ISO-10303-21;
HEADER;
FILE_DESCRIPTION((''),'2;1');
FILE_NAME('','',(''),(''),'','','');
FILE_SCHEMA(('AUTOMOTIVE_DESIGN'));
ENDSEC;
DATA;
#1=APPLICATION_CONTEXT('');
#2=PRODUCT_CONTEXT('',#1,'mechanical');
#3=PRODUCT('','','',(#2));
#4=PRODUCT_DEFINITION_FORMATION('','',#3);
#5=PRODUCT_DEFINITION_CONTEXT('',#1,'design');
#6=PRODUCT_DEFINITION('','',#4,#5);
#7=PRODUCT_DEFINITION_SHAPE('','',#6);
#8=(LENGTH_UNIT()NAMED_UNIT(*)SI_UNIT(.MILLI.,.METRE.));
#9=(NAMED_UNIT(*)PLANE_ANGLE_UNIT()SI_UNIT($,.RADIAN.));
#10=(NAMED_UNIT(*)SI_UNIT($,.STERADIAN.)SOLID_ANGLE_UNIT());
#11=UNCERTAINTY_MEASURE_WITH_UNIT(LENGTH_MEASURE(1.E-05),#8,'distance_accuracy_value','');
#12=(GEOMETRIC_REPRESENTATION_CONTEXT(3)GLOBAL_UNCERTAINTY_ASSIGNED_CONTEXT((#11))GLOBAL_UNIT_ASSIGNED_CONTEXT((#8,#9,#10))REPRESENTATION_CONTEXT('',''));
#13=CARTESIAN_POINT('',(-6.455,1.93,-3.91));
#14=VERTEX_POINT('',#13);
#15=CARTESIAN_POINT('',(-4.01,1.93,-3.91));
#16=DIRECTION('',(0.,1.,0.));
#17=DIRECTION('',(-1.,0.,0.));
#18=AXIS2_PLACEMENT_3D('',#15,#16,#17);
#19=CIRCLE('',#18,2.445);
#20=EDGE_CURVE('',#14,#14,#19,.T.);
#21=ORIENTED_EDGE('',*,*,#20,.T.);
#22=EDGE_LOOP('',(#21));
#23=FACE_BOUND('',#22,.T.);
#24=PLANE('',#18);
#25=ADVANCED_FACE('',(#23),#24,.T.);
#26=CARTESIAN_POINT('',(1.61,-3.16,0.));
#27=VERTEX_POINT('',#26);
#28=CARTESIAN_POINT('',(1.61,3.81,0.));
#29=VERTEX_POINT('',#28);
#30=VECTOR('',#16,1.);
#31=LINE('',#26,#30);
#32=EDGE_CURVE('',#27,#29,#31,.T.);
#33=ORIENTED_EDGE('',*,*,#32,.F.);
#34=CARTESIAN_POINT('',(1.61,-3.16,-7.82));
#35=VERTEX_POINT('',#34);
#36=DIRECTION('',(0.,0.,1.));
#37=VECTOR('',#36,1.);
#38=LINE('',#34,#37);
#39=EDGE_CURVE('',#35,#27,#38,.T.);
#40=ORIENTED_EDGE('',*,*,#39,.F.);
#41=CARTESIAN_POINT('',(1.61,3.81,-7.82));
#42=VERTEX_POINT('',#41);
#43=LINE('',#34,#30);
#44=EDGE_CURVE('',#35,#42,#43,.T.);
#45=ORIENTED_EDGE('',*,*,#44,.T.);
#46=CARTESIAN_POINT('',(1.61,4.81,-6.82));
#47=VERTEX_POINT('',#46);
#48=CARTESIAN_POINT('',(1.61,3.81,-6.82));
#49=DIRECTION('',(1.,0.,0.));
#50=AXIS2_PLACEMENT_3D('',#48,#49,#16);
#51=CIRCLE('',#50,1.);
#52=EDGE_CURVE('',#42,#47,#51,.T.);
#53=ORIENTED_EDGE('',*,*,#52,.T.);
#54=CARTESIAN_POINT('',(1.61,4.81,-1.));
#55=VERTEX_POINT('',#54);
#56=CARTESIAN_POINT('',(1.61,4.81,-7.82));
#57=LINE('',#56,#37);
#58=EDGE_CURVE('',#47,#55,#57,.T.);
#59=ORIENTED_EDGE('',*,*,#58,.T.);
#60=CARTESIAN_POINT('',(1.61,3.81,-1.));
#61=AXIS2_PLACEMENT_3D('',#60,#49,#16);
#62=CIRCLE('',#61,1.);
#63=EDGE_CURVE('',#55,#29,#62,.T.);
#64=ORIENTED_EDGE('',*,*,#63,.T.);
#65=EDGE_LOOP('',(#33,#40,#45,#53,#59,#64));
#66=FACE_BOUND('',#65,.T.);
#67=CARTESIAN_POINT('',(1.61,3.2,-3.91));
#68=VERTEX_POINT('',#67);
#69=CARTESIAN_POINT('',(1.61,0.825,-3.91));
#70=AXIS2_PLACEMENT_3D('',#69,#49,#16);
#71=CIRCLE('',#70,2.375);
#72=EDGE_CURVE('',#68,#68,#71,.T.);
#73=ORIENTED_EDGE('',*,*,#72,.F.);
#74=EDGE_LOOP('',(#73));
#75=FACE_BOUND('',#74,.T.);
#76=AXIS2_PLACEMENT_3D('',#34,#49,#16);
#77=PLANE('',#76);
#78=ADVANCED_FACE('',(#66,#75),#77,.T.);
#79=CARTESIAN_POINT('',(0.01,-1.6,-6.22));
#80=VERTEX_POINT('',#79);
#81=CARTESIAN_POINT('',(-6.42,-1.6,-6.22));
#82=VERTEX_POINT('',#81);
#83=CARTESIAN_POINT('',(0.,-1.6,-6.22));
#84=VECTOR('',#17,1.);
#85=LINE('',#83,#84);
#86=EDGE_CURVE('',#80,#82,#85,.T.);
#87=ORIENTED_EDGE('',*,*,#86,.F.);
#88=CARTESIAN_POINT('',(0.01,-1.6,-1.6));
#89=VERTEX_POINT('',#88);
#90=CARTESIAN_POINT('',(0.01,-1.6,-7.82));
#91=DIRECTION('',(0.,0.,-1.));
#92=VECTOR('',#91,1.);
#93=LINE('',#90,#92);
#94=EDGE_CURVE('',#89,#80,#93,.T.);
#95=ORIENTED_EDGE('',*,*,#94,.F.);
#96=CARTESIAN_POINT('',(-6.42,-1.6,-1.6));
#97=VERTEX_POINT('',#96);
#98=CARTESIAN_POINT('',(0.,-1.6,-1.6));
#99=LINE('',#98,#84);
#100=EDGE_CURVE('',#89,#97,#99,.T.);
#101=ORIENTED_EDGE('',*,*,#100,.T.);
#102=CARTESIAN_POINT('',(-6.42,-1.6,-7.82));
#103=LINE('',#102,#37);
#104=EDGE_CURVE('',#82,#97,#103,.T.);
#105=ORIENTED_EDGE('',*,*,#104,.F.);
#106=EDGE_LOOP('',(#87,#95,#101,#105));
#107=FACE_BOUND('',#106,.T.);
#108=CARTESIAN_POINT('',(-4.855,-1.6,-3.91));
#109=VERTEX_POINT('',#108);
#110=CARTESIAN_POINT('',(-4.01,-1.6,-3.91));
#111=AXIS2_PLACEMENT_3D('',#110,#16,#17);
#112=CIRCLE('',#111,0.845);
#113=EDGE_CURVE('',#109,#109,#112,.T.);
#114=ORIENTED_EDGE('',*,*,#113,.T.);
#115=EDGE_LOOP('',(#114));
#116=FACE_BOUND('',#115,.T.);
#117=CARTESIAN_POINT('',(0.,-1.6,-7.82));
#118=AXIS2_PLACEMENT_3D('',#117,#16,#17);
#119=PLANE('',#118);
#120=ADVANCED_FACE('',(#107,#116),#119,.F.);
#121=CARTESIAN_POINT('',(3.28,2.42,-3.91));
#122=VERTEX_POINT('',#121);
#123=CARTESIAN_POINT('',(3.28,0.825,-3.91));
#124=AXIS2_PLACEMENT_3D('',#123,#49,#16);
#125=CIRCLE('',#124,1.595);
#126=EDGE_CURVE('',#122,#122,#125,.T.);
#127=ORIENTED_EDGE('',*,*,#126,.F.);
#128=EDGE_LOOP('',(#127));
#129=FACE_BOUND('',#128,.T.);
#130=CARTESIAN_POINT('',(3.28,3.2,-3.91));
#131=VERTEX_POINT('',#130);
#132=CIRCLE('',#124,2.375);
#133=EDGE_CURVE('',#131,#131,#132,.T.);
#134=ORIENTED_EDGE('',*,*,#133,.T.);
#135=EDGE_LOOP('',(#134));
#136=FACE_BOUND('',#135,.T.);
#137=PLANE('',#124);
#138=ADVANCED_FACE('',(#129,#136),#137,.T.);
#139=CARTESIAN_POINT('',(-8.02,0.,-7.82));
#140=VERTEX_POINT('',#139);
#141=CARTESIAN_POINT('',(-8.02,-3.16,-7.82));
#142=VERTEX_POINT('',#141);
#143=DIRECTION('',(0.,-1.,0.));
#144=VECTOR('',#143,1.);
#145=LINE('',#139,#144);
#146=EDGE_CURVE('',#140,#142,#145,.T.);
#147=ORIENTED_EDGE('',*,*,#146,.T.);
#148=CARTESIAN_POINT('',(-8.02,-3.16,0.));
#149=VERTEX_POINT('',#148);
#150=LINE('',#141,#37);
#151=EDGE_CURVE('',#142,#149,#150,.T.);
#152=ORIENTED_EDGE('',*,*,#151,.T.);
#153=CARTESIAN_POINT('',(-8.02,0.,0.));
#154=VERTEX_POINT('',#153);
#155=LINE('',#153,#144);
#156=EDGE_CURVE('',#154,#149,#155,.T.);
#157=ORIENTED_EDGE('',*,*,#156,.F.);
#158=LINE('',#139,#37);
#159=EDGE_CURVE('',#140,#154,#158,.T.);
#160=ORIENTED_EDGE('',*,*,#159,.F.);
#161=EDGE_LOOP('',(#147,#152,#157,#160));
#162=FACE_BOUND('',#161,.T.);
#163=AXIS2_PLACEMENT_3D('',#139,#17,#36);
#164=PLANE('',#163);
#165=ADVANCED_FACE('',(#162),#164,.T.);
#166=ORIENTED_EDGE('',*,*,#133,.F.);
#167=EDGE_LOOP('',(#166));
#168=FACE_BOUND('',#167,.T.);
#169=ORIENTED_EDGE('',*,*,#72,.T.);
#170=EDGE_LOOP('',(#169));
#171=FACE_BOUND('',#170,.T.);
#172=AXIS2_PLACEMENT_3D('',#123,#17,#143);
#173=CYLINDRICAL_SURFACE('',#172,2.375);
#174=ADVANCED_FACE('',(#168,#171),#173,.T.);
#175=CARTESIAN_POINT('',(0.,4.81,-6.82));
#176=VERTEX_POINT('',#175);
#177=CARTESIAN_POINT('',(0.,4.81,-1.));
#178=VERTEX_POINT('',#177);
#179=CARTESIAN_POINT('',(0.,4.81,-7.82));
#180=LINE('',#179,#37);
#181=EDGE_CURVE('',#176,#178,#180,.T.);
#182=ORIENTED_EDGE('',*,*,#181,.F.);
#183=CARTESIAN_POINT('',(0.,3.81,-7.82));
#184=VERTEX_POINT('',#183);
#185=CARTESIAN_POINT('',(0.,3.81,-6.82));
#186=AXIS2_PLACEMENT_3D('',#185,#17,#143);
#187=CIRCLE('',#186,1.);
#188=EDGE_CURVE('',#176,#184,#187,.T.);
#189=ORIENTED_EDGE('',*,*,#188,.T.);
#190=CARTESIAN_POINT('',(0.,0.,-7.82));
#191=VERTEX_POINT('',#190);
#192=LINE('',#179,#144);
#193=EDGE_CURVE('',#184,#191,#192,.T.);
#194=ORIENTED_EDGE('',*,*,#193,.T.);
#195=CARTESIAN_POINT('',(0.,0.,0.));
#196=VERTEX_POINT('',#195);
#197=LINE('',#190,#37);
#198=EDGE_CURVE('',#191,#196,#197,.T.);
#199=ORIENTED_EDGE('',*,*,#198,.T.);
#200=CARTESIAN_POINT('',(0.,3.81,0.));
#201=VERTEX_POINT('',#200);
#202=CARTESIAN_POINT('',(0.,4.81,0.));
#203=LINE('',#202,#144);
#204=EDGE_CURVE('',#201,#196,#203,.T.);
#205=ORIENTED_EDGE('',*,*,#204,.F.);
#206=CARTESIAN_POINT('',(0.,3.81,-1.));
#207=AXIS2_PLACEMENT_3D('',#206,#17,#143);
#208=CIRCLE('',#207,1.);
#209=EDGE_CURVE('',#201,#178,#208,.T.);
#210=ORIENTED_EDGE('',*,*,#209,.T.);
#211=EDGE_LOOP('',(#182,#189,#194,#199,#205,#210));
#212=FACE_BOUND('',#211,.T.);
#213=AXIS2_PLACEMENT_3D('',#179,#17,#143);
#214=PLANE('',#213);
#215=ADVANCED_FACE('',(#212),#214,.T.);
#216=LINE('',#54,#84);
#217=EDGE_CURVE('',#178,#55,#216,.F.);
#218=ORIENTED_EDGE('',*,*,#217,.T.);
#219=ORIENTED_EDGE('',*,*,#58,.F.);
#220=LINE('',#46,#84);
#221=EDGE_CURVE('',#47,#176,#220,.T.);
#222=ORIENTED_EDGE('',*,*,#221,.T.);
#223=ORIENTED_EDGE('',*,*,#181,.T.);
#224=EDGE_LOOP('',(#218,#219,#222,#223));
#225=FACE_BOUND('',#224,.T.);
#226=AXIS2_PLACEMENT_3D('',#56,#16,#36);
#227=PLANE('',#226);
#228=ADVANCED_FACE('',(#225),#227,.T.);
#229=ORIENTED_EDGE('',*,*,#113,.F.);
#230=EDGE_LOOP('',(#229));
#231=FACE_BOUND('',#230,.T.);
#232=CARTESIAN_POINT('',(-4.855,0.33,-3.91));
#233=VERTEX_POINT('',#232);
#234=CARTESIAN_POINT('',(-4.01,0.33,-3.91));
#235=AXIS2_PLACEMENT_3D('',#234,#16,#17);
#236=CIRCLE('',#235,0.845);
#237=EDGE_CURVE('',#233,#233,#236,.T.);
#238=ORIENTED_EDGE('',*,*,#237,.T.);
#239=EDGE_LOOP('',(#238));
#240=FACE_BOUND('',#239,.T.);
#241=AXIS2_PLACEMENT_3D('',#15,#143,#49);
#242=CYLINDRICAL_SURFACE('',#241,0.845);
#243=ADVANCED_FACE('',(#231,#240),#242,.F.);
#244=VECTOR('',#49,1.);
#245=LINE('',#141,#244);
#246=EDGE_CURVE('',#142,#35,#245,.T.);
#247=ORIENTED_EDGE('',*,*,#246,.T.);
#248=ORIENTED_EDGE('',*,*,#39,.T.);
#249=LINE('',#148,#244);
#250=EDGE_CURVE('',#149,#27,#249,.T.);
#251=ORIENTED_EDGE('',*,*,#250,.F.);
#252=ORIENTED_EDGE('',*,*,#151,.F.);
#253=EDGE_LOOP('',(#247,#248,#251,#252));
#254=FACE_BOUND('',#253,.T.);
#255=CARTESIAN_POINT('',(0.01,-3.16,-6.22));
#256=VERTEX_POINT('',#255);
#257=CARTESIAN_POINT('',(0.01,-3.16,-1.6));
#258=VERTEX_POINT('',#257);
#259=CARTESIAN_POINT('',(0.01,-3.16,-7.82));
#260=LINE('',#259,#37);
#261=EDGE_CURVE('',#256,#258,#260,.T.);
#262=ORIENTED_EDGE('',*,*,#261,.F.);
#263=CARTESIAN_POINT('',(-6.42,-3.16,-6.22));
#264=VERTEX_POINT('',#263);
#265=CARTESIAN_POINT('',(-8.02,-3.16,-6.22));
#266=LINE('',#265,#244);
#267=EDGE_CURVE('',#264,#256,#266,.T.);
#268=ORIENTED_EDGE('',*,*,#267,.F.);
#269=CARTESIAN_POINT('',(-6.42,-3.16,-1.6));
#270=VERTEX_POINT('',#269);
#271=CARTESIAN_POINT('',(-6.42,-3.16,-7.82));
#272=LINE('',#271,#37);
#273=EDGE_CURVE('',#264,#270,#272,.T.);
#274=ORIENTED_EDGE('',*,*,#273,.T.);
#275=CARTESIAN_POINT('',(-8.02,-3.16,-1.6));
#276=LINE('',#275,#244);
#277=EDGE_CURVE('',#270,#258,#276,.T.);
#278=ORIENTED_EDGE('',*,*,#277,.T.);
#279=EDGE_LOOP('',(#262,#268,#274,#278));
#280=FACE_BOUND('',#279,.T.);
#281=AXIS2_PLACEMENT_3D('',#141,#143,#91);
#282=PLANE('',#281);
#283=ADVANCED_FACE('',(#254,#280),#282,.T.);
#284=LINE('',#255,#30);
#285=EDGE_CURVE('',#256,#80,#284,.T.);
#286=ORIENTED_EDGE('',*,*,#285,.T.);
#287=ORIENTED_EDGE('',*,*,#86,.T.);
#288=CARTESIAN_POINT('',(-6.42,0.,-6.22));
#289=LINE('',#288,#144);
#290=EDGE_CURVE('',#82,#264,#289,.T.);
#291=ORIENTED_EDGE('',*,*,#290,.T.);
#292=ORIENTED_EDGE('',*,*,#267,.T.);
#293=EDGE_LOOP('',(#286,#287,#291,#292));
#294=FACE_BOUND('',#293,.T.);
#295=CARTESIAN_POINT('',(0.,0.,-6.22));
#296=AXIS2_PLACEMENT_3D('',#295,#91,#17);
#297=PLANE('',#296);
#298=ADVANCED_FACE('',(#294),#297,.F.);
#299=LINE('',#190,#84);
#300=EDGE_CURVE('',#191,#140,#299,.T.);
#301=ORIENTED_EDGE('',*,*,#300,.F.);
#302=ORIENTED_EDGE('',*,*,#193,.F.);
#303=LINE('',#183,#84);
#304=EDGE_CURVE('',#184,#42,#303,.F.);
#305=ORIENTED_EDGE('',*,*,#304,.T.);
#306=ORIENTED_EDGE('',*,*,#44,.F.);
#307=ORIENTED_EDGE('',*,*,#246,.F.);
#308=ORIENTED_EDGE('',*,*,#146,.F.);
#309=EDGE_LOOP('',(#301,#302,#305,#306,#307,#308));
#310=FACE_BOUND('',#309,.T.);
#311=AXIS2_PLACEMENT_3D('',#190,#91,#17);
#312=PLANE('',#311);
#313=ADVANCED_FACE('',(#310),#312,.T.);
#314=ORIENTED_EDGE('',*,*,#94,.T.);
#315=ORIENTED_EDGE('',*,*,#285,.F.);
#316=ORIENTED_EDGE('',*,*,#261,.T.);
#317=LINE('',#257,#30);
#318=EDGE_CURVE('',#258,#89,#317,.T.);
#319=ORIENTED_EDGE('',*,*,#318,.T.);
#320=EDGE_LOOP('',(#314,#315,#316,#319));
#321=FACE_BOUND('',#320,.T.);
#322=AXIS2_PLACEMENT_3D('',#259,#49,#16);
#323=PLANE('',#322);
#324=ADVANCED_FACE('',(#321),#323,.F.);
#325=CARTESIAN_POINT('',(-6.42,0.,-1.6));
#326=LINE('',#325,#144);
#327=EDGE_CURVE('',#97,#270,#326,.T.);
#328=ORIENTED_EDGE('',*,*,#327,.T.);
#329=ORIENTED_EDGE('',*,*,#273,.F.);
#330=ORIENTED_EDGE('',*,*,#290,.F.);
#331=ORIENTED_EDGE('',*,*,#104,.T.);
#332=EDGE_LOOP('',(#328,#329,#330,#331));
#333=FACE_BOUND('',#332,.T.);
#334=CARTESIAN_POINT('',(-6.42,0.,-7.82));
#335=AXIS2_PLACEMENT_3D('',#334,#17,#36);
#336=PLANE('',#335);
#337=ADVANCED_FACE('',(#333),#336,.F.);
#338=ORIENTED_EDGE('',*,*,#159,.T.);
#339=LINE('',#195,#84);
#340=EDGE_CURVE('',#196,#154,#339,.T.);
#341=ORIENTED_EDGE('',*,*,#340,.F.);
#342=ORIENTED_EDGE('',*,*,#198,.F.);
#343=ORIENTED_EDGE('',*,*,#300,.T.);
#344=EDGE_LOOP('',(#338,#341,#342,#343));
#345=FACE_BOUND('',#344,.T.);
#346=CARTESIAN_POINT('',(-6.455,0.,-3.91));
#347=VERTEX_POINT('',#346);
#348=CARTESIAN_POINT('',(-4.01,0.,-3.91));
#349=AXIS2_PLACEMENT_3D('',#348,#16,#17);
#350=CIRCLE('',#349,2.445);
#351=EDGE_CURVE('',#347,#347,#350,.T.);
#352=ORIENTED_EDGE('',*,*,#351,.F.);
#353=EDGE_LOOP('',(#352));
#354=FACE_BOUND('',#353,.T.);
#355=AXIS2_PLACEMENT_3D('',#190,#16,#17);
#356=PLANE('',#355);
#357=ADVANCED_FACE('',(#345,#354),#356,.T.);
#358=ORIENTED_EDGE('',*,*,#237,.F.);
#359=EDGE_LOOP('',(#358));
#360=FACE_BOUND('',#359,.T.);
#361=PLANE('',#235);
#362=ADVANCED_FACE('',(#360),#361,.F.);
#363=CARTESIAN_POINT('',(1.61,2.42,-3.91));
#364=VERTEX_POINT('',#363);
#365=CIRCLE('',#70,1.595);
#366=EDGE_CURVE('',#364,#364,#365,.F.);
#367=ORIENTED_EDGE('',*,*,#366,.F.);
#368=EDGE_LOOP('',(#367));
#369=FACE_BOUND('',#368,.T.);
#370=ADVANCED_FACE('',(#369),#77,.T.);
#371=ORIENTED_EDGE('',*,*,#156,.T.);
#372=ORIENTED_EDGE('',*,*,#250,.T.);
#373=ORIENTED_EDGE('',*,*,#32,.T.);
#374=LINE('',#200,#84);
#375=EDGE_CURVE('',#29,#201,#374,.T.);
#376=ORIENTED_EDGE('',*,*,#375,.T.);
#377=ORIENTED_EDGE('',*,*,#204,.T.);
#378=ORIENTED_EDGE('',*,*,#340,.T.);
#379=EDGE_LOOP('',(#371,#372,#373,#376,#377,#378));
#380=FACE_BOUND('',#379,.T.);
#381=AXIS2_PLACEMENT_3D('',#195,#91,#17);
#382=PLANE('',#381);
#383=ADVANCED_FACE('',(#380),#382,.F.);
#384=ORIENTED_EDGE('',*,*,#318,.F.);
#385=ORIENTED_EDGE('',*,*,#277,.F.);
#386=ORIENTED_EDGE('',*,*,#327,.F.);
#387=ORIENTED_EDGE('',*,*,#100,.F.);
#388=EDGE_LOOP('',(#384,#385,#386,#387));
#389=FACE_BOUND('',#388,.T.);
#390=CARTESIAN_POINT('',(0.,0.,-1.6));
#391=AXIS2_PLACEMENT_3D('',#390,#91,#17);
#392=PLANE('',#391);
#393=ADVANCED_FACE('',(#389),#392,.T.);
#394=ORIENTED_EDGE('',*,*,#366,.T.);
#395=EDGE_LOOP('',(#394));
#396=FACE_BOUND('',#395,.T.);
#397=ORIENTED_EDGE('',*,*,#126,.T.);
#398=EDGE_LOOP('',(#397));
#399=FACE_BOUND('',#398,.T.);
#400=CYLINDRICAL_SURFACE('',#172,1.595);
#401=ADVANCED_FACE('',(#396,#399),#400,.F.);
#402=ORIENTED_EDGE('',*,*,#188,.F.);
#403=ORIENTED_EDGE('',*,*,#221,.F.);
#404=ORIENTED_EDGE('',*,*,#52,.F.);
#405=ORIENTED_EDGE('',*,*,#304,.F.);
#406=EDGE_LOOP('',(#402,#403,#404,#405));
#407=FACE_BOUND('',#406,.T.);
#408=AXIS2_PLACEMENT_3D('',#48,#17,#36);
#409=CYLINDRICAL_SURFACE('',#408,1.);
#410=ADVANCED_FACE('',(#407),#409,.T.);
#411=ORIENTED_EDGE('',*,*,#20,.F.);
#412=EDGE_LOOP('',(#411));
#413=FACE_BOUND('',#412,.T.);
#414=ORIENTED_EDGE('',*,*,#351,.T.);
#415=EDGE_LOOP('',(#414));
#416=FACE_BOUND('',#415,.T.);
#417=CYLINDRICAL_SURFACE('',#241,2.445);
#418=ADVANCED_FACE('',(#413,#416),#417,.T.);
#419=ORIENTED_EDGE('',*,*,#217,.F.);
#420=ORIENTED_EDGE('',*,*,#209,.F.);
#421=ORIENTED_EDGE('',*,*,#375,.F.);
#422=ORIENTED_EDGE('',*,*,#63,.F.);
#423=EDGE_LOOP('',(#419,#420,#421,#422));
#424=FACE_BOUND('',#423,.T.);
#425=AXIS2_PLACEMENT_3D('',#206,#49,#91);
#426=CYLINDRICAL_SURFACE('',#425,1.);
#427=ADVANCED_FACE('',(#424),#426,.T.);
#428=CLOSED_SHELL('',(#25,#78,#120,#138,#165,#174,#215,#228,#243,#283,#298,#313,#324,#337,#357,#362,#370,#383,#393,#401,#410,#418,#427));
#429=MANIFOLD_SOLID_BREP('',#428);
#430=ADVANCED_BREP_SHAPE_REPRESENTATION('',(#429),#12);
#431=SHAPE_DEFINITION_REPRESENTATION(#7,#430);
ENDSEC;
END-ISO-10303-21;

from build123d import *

# Parameters (mm, degrees)
BOSS_EXTRUDE1_DEPTH = 7.82
SKETCH2_R           = 2.445
BOSS_EXTRUDE2_DEPTH = 1.93
SKETCH3_R           = 2.375
SKETCH3_R_2         = 1.595
BOSS_EXTRUDE3_DEPTH = 1.67
SHELL1_START        = -3.16
SHELL1_OUTLINE_W    = 6.43
SHELL1_OUTLINE_H    = 4.62
SHELL1_DEPTH        = 1.56
SHELL1_START_2      = -1.6
SHELL1_2_OUTLINE_R  = 0.845
SHELL1_2_DEPTH      = 1.93
FILLET1_R           = 1


# Read off the part's stored shape, not the designer's step: Shell1
with BuildPart() as part:
    # Sketch1 → Boss-Extrude1 (new body)
    with BuildSketch(Plane.XY):
        Polygon((0, 0), (-8.02, 0), (-8.02, -3.16), (1.61, -3.16), (1.61, 4.81), (0, 4.81), align=None)
    extrude(amount=-BOSS_EXTRUDE1_DEPTH)

    # Sketch2 → Boss-Extrude2 (add)
    with BuildSketch(Plane(origin=(0, 0, 0), x_dir=(1, 0, 0), z_dir=(0, 1, 0))):
        with Locations(Location((-4.01, 3.91, 0), (0, 0, 180))):
            Circle(SKETCH2_R)
    extrude(amount=BOSS_EXTRUDE2_DEPTH)

    # Sketch3 → Boss-Extrude3 (add)
    with BuildSketch(Plane(origin=(1.61, 0, 0), x_dir=(0, 0, -1), z_dir=(1, 0, 0))):
        with Locations(Location((3.91, 0.825, 0), (0, 0, 90))):
            Circle(SKETCH3_R)
        with Locations(Location((3.91, 0.825, 0), (0, 0, 90))):
            Circle(SKETCH3_R_2, mode=Mode.SUBTRACT)
    extrude(amount=BOSS_EXTRUDE3_DEPTH)

    # Shell1 outline → Shell1 (cut)
    with BuildSketch(Plane(origin=(0, 0, 0), x_dir=(1, 0, 0), z_dir=(0, 1, 0)).offset(SHELL1_START)):
        with Locations((-3.205, 3.91)):
            Rectangle(SHELL1_OUTLINE_W, SHELL1_OUTLINE_H)
    extrude(amount=SHELL1_DEPTH, mode=Mode.SUBTRACT)

    # Shell1 2 outline → Shell1 2 (cut)
    with BuildSketch(Plane(origin=(0, 0, 0), x_dir=(1, 0, 0), z_dir=(0, 1, 0)).offset(SHELL1_START_2)):
        with Locations((-4.01, 3.91)):
            Circle(SHELL1_2_OUTLINE_R)
    extrude(amount=SHELL1_2_DEPTH, mode=Mode.SUBTRACT)

    # Fillet1
    fillet1_edges = [part.edges().sort_by_distance(p)[0] for p in [
        (0.805, 4.81, -7.82),
        (0.805, 4.81, 0),
    ]]
    fillet(fillet1_edges, radius=FILLET1_R)


solid = part.part
